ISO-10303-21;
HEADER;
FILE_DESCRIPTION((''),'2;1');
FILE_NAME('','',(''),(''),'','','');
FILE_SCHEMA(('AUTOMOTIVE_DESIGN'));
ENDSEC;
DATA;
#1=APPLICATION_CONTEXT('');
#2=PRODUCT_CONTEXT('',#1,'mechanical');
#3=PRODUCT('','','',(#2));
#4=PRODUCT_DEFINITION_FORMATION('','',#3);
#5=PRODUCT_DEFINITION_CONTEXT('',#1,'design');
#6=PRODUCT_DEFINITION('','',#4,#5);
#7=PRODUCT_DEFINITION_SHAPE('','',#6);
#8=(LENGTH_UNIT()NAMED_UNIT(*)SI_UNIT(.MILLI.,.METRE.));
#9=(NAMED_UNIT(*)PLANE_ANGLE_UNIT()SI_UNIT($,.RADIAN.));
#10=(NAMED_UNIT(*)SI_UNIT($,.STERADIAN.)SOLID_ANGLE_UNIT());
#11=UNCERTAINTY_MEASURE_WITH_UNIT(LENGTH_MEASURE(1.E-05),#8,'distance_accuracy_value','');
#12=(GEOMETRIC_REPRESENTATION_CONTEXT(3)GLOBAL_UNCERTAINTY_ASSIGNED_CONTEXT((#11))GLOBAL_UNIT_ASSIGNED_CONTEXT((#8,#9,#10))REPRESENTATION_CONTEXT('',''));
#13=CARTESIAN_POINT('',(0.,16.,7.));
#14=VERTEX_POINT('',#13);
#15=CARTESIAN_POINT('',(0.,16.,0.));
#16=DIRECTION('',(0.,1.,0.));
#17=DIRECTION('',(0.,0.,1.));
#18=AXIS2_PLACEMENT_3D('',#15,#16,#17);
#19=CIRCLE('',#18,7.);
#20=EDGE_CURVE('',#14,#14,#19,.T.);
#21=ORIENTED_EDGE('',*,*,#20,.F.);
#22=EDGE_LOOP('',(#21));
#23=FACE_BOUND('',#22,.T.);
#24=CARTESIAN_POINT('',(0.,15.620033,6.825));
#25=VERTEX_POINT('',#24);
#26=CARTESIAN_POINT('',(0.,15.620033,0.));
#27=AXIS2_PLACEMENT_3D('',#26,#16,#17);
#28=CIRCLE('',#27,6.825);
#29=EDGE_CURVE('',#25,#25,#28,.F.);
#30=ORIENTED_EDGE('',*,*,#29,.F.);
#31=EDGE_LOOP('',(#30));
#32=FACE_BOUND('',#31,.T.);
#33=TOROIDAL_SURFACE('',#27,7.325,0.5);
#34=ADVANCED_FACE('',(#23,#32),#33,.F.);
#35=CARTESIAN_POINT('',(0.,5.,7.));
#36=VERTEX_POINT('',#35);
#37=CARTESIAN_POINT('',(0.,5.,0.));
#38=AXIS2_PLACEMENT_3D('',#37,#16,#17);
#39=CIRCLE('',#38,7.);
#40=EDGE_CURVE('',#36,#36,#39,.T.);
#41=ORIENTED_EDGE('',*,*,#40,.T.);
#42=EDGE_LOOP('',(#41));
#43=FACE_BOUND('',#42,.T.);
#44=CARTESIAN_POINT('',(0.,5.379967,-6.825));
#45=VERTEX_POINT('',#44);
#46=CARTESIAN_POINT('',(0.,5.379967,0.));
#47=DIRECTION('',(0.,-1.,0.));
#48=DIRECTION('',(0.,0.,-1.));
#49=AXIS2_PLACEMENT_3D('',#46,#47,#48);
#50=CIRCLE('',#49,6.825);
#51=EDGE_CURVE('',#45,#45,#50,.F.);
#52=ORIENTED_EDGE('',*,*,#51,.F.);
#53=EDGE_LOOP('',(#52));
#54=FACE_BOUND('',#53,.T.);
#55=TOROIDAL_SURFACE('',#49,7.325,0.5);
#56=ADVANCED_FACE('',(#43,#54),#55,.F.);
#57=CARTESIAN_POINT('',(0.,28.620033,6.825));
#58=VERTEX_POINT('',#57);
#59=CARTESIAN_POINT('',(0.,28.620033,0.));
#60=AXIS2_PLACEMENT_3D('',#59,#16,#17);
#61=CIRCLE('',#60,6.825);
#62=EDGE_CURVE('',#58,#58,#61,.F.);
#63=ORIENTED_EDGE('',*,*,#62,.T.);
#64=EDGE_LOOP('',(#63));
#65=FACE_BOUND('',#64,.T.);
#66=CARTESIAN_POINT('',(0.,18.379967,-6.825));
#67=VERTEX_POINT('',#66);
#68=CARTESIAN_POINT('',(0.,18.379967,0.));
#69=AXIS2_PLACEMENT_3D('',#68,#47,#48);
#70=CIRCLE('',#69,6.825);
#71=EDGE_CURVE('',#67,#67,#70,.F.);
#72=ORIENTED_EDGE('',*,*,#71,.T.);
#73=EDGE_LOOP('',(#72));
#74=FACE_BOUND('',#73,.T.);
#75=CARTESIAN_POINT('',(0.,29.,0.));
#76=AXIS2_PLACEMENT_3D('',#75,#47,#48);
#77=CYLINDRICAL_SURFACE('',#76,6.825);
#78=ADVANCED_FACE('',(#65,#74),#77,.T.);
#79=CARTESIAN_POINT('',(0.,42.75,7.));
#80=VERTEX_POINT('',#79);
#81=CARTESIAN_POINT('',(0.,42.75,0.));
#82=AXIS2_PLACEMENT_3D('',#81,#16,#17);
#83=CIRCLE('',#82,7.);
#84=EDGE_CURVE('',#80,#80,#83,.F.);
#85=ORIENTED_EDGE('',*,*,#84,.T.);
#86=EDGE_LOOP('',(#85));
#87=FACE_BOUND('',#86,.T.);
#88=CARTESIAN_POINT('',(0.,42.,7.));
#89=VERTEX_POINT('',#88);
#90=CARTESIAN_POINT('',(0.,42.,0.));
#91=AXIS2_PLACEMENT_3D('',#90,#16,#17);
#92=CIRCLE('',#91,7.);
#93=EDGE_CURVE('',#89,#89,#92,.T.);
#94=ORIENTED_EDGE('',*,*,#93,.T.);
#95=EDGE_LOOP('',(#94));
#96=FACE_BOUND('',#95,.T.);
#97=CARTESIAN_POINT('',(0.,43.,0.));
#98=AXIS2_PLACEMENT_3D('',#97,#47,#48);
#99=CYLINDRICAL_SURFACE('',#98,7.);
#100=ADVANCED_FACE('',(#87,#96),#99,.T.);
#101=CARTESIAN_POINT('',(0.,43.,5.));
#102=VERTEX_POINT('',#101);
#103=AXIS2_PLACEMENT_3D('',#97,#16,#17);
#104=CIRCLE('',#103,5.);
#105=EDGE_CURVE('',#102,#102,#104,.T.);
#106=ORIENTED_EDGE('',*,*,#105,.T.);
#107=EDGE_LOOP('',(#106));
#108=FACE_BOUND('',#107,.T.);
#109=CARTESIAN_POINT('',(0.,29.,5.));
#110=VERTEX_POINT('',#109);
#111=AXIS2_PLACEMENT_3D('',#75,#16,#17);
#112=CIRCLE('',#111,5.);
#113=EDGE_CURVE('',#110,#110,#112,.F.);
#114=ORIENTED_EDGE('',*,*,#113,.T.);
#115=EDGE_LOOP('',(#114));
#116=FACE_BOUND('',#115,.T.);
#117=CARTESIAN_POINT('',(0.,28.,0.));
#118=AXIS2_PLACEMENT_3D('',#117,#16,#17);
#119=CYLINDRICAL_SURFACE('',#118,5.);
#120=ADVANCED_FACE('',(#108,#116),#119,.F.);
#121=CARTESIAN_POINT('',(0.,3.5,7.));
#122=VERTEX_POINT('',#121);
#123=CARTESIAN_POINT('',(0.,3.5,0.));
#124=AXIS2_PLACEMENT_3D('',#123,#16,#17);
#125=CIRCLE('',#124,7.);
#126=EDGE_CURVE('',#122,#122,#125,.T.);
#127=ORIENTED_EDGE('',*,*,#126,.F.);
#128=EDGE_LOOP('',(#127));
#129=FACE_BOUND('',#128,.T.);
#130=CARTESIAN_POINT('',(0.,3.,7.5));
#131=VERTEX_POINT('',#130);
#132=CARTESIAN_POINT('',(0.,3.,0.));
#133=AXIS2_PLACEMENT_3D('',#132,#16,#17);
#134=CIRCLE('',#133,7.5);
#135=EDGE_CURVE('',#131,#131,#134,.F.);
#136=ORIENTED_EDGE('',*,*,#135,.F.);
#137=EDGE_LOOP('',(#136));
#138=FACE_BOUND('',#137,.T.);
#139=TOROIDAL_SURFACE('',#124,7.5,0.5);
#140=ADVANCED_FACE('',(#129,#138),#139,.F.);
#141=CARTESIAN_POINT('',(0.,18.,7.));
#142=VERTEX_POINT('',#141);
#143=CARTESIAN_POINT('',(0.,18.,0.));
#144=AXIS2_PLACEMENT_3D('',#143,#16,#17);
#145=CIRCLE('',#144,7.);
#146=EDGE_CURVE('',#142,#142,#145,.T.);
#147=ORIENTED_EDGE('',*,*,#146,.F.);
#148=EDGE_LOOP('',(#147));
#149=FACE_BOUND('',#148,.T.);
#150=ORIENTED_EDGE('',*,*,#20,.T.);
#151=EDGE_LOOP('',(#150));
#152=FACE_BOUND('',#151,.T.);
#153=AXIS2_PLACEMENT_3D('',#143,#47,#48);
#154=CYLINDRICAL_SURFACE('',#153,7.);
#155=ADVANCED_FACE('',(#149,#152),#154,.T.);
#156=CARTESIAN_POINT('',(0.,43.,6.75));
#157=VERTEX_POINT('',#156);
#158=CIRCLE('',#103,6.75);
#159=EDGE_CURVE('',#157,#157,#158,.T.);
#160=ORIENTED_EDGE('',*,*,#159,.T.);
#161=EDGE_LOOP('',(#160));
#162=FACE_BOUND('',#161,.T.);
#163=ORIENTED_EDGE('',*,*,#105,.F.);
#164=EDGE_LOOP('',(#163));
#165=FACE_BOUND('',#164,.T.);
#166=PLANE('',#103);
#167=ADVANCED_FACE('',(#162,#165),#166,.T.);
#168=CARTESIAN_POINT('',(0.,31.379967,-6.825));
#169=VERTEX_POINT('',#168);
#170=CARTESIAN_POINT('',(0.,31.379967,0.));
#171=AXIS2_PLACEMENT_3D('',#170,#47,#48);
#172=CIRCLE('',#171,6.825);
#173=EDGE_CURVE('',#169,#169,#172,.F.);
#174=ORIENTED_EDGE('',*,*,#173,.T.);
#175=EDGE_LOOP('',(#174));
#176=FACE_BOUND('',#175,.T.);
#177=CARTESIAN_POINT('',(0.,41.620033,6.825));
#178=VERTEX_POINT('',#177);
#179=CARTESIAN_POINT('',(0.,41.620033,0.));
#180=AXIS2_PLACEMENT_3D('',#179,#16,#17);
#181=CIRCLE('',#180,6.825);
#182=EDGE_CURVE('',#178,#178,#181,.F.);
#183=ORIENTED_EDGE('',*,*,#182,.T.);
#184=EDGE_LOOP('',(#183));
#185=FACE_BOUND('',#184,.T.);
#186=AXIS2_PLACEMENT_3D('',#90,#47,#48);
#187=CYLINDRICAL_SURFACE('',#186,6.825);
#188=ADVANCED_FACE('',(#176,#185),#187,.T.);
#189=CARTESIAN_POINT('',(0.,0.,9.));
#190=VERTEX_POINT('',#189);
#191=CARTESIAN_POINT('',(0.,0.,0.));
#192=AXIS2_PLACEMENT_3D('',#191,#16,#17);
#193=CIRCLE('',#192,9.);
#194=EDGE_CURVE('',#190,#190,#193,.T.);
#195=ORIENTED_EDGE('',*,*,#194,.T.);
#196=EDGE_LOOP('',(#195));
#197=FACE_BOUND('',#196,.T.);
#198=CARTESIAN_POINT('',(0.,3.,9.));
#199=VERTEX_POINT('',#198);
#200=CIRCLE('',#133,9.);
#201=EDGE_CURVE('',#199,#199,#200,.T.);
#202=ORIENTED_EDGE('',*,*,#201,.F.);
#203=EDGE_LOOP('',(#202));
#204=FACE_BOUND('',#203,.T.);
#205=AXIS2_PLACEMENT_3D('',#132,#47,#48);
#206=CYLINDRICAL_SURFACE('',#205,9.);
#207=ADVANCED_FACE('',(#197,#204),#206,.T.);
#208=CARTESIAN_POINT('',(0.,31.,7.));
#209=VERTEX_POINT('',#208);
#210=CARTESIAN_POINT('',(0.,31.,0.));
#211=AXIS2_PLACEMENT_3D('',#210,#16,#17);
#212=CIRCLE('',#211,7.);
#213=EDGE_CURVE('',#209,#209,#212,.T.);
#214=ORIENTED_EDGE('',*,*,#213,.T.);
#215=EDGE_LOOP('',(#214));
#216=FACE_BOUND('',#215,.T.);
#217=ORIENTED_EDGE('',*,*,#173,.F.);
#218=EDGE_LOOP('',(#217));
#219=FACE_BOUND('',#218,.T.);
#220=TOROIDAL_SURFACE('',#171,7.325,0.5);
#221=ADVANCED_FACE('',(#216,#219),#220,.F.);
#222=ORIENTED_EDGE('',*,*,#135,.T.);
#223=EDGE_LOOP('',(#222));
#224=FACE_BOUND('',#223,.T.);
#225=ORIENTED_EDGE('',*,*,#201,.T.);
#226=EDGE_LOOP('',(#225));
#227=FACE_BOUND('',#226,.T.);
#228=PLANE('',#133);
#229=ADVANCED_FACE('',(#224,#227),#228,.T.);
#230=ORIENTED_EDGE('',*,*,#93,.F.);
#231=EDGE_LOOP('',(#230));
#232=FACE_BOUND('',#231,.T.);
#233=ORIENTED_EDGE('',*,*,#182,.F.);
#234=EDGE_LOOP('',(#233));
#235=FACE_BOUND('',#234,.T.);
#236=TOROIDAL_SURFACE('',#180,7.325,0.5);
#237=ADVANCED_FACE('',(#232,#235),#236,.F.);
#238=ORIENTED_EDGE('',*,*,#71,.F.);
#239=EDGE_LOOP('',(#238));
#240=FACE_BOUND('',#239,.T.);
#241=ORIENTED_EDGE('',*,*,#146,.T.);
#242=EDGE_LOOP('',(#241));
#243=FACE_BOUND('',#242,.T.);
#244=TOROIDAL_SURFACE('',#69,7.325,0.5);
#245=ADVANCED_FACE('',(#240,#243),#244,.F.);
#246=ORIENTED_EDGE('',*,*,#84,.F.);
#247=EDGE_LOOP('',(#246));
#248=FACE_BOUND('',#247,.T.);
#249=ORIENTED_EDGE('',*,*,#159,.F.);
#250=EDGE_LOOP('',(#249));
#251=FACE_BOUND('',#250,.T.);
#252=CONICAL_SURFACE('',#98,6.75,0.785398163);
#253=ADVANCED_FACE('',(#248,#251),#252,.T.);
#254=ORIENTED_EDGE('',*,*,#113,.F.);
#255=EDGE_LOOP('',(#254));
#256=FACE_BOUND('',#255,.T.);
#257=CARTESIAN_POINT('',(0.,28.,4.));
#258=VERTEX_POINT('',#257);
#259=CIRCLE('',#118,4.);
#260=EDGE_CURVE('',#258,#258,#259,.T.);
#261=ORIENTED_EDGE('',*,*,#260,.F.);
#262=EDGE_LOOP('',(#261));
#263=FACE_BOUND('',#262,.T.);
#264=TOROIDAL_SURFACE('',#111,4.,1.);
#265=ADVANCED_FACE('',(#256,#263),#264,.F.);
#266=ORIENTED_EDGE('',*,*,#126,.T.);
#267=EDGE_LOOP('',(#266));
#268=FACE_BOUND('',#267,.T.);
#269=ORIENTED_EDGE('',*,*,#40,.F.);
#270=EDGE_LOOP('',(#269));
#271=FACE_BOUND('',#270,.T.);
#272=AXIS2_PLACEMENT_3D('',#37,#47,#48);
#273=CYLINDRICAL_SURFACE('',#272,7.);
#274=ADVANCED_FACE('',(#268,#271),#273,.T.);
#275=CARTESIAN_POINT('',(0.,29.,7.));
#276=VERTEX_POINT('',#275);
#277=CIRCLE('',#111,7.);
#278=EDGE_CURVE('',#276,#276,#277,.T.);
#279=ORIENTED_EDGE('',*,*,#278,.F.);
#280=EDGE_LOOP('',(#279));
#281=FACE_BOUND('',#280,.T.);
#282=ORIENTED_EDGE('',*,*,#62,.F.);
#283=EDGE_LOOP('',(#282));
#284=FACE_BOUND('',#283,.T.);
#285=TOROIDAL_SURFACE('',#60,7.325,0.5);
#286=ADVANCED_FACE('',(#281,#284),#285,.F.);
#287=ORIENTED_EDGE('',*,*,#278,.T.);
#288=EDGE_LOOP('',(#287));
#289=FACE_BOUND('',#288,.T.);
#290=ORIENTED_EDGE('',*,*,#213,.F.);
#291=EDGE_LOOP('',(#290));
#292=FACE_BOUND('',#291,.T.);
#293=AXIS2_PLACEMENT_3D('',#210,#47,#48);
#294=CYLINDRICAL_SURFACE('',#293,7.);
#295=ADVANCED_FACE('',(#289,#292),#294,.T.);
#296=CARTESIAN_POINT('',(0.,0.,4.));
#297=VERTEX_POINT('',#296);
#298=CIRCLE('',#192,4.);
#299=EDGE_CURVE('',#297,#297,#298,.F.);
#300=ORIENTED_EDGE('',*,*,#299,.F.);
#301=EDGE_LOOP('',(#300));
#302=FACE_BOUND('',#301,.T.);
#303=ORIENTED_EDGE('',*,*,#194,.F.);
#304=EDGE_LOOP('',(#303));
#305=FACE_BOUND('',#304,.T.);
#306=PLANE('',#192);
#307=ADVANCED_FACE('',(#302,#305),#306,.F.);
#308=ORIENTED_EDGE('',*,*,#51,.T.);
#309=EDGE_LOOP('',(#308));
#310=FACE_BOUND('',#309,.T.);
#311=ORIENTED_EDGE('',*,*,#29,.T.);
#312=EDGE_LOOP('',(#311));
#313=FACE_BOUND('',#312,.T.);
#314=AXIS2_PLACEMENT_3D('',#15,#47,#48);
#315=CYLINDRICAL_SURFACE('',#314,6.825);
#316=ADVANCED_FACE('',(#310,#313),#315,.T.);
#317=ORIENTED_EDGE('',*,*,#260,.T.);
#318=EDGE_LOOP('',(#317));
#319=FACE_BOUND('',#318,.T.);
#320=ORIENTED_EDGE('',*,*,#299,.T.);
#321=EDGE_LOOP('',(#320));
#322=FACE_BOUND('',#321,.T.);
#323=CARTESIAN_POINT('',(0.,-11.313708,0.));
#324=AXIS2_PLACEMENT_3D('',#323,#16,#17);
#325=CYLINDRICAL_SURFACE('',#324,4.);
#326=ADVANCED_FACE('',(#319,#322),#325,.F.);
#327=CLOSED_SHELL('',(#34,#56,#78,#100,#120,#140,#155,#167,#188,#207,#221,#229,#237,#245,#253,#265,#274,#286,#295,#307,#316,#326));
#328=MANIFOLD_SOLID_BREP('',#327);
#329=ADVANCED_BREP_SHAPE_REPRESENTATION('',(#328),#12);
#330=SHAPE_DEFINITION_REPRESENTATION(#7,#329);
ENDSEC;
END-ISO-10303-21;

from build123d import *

# Parameters (mm, degrees)
SKETCH1_R           = 9
BOSS_EXTRUDE1_DEPTH = 3
SKETCH2_R           = 7
BOSS_EXTRUDE2_DEPTH = 2
SKETCH3_R           = 6.825
BOSS_EXTRUDE3_DEPTH = 11
SKETCH4_R           = 7
BOSS_EXTRUDE4_DEPTH = 2
SKETCH5_R           = 6.825
BOSS_EXTRUDE5_DEPTH = 11
SKETCH6_R           = 7
BOSS_EXTRUDE6_DEPTH = 2
SKETCH7_R           = 6.825
BOSS_EXTRUDE7_DEPTH = 11
SKETCH8_R           = 7
BOSS_EXTRUDE8_DEPTH = 1
FILLET3_R           = 0.5
CHAMFER2_SIZE       = 0.25
SKETCH13_R          = 5
CUT_EXTRUDE1_DEPTH  = 15
SKETCH14_R          = 4
CUT_EXTRUDE2_DEPTH  = 28
FILLET4_R           = 1


# Some blends are built 0.0001 mm under size
with BuildPart() as part:
    # Sketch1 → Boss-Extrude1 (new body)
    with BuildSketch(Plane(origin=(0, 0, 0), x_dir=(1, 0, 0), z_dir=(0, 1, 0))):
        with Locations(Location((0, 0, 0), (0, 0, 270))):
            Circle(SKETCH1_R)
    extrude(amount=BOSS_EXTRUDE1_DEPTH)

    # Sketch2 → Boss-Extrude2 (add)
    with BuildSketch(Plane(origin=(0, 3, 0), x_dir=(1, 0, 0), z_dir=(0, 1, 0))):
        with Locations(Location((0, 0, 0), (0, 0, 270))):
            Circle(SKETCH2_R)
    extrude(amount=BOSS_EXTRUDE2_DEPTH)

    # Sketch3 → Boss-Extrude3 (add)
    with BuildSketch(Plane(origin=(0, 5, 0), x_dir=(1, 0, 0), z_dir=(0, 1, 0))):
        with Locations(Location((0, 0, 0), (0, 0, 270))):
            Circle(SKETCH3_R)
    extrude(amount=BOSS_EXTRUDE3_DEPTH)

    # Sketch4 → Boss-Extrude4 (add)
    with BuildSketch(Plane(origin=(0, 16, 0), x_dir=(1, 0, 0), z_dir=(0, 1, 0))):
        with Locations(Location((0, 0, 0), (0, 0, 270))):
            Circle(SKETCH4_R)
    extrude(amount=BOSS_EXTRUDE4_DEPTH)

    # Sketch5 → Boss-Extrude5 (add)
    with BuildSketch(Plane(origin=(0, 18, 0), x_dir=(1, 0, 0), z_dir=(0, 1, 0))):
        with Locations(Location((0, 0, 0), (0, 0, 270))):
            Circle(SKETCH5_R)
    extrude(amount=BOSS_EXTRUDE5_DEPTH)

    # Sketch6 → Boss-Extrude6 (add)
    with BuildSketch(Plane(origin=(0, 29, 0), x_dir=(1, 0, 0), z_dir=(0, 1, 0))):
        with Locations(Location((0, 0, 0), (0, 0, 270))):
            Circle(SKETCH6_R)
    extrude(amount=BOSS_EXTRUDE6_DEPTH)

    # Sketch7 → Boss-Extrude7 (add)
    with BuildSketch(Plane(origin=(0, 31, 0), x_dir=(1, 0, 0), z_dir=(0, 1, 0))):
        with Locations(Location((0, 0, 0), (0, 0, 270))):
            Circle(SKETCH7_R)
    extrude(amount=BOSS_EXTRUDE7_DEPTH)

    # Sketch8 → Boss-Extrude8 (add)
    with BuildSketch(Plane(origin=(0, 42, 0), x_dir=(1, 0, 0), z_dir=(0, 1, 0))):
        with Locations(Location((0, 0, 0), (0, 0, 270))):
            Circle(SKETCH8_R)
    extrude(amount=BOSS_EXTRUDE8_DEPTH)

    # Fillet3
    # the kernel refuses this fillet: 0.5 mm, written as the material it adds along each edge
    with BuildSketch(Plane(origin=(0, 16, 0), x_dir=(0, 0, 1), z_dir=(-1, 0, 0))) as fillet3_piece_1:
        with BuildLine():
            CenterArc((7.325, -0.379967104), FILLET3_R, 130.541601874, 49.458398126)
            Line((6.825, -0.379967104), (6.815, -0.379967104))
            Line((6.815, -0.379967104), (6.815, 0))
            Line((6.815, 0), (6.825, 0.01))
            ThreePointArc((6.825, 0.01), (6.9125, 0.01), (6.9935, 0.007599342))
            Line((6.9935, 0.007599342), (7, 0))
        make_face()
    revolve(axis=Axis((0, 16, 0), (0, 1, 0)))
    with BuildSketch(Plane(origin=(0, 18, 0), x_dir=(0, 0, 1), z_dir=(-1, 0, 0))) as fillet3_piece_2:
        with BuildLine():
            CenterArc((7.325, 0.379967104), FILLET3_R, 180, 49.458398126)
            Line((7, 0), (6.9935, -0.007599342))
            ThreePointArc((6.9935, -0.007599342), (6.9125, -0.01), (6.825, -0.01))
            Line((6.825, -0.01), (6.815, 0))
            Line((6.815, 0), (6.815, 0.379967104))
            Line((6.815, 0.379967104), (6.825, 0.379967104))
        make_face()
    revolve(axis=Axis((0, 18, 0), (0, 1, 0)))
    with BuildSketch(Plane(origin=(0, 29, 0), x_dir=(0, 0, 1), z_dir=(-1, 0, 0))) as fillet3_piece_3:
        with BuildLine():
            CenterArc((7.325, -0.379967104), FILLET3_R, 130.541601874, 49.458398126)
            Line((6.825, -0.379967104), (6.815, -0.379967104))
            Line((6.815, -0.379967104), (6.815, 0))
            Line((6.815, 0), (6.825, 0.01))
            ThreePointArc((6.825, 0.01), (6.9125, 0.01), (6.9935, 0.007599342))
            Line((6.9935, 0.007599342), (7, 0))
        make_face()
    revolve(axis=Axis((0, 29, 0), (0, 1, 0)))
    with BuildSketch(Plane(origin=(0, 31, 0), x_dir=(0, 0, 1), z_dir=(-1, 0, 0))) as fillet3_piece_4:
        with BuildLine():
            CenterArc((7.325, 0.379967104), FILLET3_R, 180, 49.458398126)
            Line((7, 0), (6.9935, -0.007599342))
            ThreePointArc((6.9935, -0.007599342), (6.9125, -0.01), (6.825, -0.01))
            Line((6.825, -0.01), (6.815, 0))
            Line((6.815, 0), (6.815, 0.379967104))
            Line((6.815, 0.379967104), (6.825, 0.379967104))
        make_face()
    revolve(axis=Axis((0, 31, 0), (0, 1, 0)))
    with BuildSketch(Plane(origin=(0, 42, 0), x_dir=(0, 0, 1), z_dir=(-1, 0, 0))) as fillet3_piece_5:
        with BuildLine():
            CenterArc((7.325, -0.379967104), FILLET3_R, 130.541601874, 49.458398126)
            Line((6.825, -0.379967104), (6.815, -0.379967104))
            Line((6.815, -0.379967104), (6.815, 0))
            Line((6.815, 0), (6.825, 0.01))
            ThreePointArc((6.825, 0.01), (6.9125, 0.01), (6.9935, 0.007599342))
            Line((6.9935, 0.007599342), (7, 0))
        make_face()
    revolve(axis=Axis((0, 42, 0), (0, 1, 0)))
    with BuildSketch(Plane(origin=(0, 3, 0), x_dir=(0, 0, 1), z_dir=(-1, 0, 0))) as fillet3_piece_6:
        with BuildLine():
            CenterArc((7 + FILLET3_R, FILLET3_R), FILLET3_R, 180, 90)
            Line((7 + FILLET3_R, 0), (7 + FILLET3_R, -FILLET3_R * 0.02))
            Line((7 + FILLET3_R, -FILLET3_R * 0.02), (7 - FILLET3_R * 0.02, -FILLET3_R * 0.02))
            Line((7 - FILLET3_R * 0.02, -FILLET3_R * 0.02), (7 - FILLET3_R * 0.02, FILLET3_R))
            Line((7 - FILLET3_R * 0.02, FILLET3_R), (7, FILLET3_R))
        make_face()
    revolve(axis=Axis((0, 3, 0), (0, 1, 0)))
    with BuildSketch(Plane(origin=(0, 5, 0), x_dir=(0, 0, 1), z_dir=(-1, 0, 0))) as fillet3_piece_7:
        with BuildLine():
            CenterArc((7.325, 0.379967104), FILLET3_R, 180, 49.458398126)
            Line((7, 0), (6.9935, -0.007599342))
            ThreePointArc((6.9935, -0.007599342), (6.9125, -0.01), (6.825, -0.01))
            Line((6.825, -0.01), (6.815, 0))
            Line((6.815, 0), (6.815, 0.379967104))
            Line((6.815, 0.379967104), (6.825, 0.379967104))
        make_face()
    revolve(axis=Axis((0, 5, 0), (0, 1, 0)))

    # Chamfer2
    chamfer2_edges = [part.edges().sort_by_distance(p)[0] for p in [
        (0, 43, -7),
    ]]
    chamfer(chamfer2_edges, length=CHAMFER2_SIZE)

    # Sketch13 → Cut-Extrude1 (cut)
    with BuildSketch(Plane(origin=(0, 43, 0), x_dir=(1, 0, 0), z_dir=(0, 1, 0))):
        with Locations(Location((0, 0, 0), (0, 0, 270))):
            Circle(SKETCH13_R)
    extrude(amount=-CUT_EXTRUDE1_DEPTH, mode=Mode.SUBTRACT)

    # Sketch14 → Cut-Extrude2 (cut)
    with BuildSketch(Plane(origin=(0, 28, 0), x_dir=(1, 0, 0), z_dir=(0, 1, 0))):
        with Locations(Location((0, 0, 0), (0, 0, 270))):
            Circle(SKETCH14_R)
    extrude(amount=-CUT_EXTRUDE2_DEPTH, mode=Mode.SUBTRACT)

    # Fillet4
    fillet4_edges = [part.edges().sort_by_distance(p)[0] for p in [
        (0, 28, -5),
    ]]
    fillet(fillet4_edges, radius=FILLET4_R - 0.0001)  # a hair under: the kernel refuses the full size


solid = part.part
